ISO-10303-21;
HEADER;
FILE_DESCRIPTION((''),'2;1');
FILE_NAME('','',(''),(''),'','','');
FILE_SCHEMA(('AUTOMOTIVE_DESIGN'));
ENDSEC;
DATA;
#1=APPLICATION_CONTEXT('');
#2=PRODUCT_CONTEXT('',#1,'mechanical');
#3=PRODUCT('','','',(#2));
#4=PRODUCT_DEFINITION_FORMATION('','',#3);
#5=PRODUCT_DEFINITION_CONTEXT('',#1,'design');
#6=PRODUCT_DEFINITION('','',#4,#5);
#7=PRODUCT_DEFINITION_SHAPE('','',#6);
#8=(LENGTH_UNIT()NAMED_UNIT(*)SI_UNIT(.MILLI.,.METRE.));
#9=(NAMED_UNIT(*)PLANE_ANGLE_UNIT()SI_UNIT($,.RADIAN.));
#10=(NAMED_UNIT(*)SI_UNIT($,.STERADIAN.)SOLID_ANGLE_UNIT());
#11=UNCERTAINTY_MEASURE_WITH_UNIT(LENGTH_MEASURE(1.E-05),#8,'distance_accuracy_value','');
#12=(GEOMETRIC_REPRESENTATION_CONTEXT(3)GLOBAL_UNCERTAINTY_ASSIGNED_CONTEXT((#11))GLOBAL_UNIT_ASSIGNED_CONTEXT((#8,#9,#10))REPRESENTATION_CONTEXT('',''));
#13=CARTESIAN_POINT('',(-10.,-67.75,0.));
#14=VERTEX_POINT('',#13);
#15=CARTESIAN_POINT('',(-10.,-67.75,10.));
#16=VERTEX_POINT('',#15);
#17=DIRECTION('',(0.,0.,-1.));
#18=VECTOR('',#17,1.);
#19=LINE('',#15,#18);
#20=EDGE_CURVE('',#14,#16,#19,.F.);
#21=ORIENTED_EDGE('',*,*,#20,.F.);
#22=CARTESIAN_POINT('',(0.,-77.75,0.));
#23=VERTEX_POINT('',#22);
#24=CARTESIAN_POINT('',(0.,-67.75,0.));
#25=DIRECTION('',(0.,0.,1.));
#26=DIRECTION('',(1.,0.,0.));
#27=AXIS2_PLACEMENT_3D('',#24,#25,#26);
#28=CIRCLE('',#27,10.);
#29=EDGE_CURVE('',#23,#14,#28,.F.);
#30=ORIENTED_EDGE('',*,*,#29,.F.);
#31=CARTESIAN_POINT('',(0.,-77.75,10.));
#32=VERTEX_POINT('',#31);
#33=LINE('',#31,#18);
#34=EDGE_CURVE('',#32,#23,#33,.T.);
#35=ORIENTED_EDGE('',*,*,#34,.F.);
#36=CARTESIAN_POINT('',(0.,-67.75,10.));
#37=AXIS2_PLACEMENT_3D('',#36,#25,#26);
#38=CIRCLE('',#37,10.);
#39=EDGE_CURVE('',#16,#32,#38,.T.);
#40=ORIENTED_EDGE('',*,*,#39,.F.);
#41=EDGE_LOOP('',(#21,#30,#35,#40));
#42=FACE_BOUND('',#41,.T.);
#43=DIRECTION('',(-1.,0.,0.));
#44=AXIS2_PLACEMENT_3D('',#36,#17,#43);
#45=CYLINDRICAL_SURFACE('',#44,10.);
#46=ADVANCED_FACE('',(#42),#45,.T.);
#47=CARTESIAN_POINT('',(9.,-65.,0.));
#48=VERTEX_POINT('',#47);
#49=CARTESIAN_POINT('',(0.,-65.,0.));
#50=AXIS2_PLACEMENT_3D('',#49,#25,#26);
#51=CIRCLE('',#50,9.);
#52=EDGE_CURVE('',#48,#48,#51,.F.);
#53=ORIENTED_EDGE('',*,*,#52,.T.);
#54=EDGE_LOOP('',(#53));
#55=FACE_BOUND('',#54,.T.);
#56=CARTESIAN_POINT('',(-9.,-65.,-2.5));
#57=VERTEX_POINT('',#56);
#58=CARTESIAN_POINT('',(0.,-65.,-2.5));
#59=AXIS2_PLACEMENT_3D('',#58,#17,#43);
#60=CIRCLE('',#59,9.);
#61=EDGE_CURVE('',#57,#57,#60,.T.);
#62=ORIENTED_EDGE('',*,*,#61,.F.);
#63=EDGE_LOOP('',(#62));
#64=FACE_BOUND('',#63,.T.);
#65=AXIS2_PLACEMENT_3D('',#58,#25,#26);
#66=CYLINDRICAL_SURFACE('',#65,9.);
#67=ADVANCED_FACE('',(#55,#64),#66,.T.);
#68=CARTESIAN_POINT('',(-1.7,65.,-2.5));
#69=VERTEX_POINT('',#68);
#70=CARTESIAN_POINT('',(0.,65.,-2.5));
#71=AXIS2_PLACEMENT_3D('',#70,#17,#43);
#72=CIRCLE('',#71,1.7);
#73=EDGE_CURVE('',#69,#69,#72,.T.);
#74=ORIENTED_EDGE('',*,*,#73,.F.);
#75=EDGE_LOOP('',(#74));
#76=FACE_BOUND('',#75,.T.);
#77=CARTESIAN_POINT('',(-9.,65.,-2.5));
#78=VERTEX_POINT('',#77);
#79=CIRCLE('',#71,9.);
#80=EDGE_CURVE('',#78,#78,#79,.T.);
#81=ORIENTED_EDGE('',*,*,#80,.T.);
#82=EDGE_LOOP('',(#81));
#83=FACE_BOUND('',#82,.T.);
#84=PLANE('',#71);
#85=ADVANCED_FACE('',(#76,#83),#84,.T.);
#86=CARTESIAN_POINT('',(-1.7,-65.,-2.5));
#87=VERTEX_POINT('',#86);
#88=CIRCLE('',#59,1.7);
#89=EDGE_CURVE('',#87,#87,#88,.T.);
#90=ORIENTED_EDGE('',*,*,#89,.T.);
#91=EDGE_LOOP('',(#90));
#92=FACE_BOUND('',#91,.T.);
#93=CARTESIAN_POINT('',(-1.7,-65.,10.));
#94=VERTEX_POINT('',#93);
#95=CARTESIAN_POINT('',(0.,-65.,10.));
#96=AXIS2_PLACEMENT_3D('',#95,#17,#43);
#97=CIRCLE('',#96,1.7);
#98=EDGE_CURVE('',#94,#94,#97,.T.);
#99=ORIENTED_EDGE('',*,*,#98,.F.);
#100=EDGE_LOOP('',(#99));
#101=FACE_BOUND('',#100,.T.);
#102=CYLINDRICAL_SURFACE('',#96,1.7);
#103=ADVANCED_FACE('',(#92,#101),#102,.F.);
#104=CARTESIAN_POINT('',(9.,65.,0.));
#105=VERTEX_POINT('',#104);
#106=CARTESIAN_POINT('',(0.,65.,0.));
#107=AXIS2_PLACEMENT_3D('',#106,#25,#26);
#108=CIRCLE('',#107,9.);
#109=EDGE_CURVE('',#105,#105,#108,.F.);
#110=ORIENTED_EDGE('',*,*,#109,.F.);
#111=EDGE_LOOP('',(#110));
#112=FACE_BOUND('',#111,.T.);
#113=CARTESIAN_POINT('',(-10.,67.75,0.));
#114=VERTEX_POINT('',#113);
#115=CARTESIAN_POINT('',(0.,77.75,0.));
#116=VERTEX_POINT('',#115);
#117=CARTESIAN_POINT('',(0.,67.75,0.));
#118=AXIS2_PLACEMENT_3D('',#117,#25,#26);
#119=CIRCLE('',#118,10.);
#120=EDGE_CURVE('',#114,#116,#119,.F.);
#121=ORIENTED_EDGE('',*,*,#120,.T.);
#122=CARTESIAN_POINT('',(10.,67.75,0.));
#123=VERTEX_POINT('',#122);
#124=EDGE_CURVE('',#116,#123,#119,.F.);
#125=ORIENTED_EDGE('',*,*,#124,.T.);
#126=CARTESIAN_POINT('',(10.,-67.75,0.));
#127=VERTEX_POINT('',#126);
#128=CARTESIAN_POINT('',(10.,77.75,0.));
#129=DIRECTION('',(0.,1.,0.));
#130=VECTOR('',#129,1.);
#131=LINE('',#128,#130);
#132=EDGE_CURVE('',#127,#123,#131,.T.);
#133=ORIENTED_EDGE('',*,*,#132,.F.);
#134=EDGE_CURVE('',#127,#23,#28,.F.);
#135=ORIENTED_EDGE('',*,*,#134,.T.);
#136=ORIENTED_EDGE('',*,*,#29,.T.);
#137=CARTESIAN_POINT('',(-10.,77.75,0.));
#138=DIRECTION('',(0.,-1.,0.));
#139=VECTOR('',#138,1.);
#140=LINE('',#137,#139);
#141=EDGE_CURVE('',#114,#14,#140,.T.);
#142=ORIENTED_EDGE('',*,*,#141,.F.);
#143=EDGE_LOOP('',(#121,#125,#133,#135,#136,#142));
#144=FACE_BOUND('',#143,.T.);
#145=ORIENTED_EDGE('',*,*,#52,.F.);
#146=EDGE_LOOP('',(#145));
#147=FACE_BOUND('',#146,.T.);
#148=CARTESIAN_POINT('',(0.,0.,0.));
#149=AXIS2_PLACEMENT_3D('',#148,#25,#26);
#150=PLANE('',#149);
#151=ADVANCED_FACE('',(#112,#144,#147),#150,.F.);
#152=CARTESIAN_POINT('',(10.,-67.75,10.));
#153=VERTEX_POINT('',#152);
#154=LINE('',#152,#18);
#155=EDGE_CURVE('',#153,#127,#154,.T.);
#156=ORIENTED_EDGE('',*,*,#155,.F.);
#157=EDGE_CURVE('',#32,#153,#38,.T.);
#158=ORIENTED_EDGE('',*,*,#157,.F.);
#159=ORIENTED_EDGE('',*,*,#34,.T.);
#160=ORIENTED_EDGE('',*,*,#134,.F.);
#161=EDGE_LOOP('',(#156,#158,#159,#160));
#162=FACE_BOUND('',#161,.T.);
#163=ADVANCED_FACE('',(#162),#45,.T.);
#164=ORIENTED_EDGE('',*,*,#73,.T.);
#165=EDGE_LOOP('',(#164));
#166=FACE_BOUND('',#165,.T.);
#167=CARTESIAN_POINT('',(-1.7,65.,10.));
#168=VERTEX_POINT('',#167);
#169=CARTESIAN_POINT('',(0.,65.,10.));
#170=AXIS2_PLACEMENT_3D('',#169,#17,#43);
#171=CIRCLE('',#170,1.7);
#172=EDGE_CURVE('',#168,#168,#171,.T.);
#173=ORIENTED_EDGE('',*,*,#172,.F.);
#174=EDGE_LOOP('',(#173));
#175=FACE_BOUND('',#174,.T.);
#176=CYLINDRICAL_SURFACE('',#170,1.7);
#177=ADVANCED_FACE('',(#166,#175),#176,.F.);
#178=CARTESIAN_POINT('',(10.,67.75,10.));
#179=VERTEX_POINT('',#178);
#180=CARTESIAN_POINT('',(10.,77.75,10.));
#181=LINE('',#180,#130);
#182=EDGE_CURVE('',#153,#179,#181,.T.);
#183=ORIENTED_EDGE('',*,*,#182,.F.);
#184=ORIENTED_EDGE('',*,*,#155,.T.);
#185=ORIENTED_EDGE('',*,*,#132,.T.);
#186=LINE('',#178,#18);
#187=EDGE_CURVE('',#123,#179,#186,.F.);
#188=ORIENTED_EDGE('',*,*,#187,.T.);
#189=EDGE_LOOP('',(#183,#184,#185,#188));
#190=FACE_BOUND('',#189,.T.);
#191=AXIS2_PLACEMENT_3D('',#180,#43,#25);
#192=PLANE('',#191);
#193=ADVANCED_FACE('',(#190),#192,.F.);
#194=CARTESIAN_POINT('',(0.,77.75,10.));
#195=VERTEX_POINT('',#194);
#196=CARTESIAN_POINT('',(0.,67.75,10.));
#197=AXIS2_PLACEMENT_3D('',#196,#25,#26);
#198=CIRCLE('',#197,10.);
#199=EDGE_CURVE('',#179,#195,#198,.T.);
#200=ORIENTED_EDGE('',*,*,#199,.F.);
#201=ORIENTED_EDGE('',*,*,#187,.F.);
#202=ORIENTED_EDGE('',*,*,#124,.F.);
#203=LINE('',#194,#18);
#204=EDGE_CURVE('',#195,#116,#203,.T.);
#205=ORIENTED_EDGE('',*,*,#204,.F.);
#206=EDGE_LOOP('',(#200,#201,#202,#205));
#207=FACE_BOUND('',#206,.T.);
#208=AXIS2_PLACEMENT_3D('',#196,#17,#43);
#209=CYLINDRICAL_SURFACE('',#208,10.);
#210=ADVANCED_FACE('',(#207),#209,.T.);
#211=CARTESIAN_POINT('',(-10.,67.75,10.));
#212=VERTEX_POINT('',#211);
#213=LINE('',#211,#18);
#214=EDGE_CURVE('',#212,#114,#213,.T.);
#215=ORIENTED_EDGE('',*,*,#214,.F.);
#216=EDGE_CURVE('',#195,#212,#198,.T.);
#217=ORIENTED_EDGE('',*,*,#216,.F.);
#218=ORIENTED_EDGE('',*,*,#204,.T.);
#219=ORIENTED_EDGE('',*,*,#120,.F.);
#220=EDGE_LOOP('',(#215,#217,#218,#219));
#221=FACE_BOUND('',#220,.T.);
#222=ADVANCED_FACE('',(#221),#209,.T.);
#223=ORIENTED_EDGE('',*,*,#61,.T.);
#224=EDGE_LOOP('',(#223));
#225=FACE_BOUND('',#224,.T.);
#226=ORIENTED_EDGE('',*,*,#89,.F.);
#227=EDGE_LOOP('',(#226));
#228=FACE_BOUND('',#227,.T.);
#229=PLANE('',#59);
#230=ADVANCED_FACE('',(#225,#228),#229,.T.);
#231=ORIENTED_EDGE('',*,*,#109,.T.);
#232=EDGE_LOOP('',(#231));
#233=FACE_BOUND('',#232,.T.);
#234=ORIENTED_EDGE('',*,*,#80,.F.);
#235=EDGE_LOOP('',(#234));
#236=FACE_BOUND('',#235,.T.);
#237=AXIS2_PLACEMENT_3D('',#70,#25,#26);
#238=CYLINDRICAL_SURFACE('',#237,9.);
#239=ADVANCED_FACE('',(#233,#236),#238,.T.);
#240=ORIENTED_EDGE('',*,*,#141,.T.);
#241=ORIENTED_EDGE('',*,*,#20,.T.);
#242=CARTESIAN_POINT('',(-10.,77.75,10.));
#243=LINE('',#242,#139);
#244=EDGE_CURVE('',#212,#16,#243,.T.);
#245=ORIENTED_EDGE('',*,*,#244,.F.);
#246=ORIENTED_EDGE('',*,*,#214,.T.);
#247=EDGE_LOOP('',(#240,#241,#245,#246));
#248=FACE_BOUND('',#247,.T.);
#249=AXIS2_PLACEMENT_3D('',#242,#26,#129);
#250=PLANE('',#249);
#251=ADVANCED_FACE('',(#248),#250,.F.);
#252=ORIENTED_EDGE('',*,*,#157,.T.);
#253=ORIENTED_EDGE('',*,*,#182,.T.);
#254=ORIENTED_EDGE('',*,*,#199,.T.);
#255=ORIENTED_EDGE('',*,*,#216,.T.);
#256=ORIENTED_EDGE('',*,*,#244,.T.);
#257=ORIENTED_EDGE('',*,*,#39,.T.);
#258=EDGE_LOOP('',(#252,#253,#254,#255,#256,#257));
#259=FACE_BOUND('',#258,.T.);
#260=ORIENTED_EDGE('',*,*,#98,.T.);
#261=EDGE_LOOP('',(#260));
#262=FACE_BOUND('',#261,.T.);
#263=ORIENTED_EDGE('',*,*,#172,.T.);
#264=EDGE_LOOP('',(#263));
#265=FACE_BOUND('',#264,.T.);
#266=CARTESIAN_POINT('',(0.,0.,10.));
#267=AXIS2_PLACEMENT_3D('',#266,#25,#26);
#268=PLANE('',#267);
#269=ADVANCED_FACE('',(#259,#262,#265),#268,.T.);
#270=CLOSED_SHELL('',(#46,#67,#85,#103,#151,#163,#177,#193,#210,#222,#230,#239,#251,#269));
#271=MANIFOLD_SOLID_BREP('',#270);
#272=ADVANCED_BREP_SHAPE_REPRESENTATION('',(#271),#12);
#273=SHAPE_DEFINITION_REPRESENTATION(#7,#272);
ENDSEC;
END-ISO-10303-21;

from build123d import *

# Parameters (mm, degrees)
SKETCH1_W           = 20
SKETCH1_H           = 155.5
BOSS_EXTRUDE1_DEPTH = 10
SKETCH2_R           = 9
BOSS_EXTRUDE2_DEPTH = 2.5
SKETCH3_R           = 1.7
CUT_EXTRUDE1_DEPTH  = 80.380806874
FILLET1_R           = 10


with BuildPart() as part:
    # Sketch1 → Boss-Extrude1 (new body)
    with BuildSketch(Plane.XY):
        Rectangle(SKETCH1_W, SKETCH1_H)
    extrude(amount=BOSS_EXTRUDE1_DEPTH)

    # Sketch2 → Boss-Extrude2 (add)
    with BuildSketch(Plane(origin=(0, 0, 0), x_dir=(-1, 0, 0), z_dir=(0, 0, -1))):
        with Locations(Location((0, 65, 0), (0, 0, 180))):
            Circle(SKETCH2_R)
        with Locations(Location((0, -65, 0), (0, 0, 180))):
            Circle(SKETCH2_R)
    extrude(amount=BOSS_EXTRUDE2_DEPTH)

    # Sketch3 → Cut-Extrude1 (cut, through all)
    with BuildSketch(Plane(origin=(0, 0, -2.5), x_dir=(-1, 0, 0), z_dir=(0, 0, -1))):
        with Locations((0, 65)):
            Circle(SKETCH3_R)
        with Locations((0, -65)):
            Circle(SKETCH3_R)
    extrude(amount=-CUT_EXTRUDE1_DEPTH, mode=Mode.SUBTRACT)

    # Fillet1
    fillet1_edges = [part.edges().sort_by_distance(p)[0] for p in [
        (10, -77.75, 5),
        (-10, -77.75, 5),
        (-10, 77.75, 5),
        (10, 77.75, 5),
    ]]
    fillet(fillet1_edges, radius=FILLET1_R - 0.0001)  # a hair under: the kernel refuses the full size


solid = part.part
